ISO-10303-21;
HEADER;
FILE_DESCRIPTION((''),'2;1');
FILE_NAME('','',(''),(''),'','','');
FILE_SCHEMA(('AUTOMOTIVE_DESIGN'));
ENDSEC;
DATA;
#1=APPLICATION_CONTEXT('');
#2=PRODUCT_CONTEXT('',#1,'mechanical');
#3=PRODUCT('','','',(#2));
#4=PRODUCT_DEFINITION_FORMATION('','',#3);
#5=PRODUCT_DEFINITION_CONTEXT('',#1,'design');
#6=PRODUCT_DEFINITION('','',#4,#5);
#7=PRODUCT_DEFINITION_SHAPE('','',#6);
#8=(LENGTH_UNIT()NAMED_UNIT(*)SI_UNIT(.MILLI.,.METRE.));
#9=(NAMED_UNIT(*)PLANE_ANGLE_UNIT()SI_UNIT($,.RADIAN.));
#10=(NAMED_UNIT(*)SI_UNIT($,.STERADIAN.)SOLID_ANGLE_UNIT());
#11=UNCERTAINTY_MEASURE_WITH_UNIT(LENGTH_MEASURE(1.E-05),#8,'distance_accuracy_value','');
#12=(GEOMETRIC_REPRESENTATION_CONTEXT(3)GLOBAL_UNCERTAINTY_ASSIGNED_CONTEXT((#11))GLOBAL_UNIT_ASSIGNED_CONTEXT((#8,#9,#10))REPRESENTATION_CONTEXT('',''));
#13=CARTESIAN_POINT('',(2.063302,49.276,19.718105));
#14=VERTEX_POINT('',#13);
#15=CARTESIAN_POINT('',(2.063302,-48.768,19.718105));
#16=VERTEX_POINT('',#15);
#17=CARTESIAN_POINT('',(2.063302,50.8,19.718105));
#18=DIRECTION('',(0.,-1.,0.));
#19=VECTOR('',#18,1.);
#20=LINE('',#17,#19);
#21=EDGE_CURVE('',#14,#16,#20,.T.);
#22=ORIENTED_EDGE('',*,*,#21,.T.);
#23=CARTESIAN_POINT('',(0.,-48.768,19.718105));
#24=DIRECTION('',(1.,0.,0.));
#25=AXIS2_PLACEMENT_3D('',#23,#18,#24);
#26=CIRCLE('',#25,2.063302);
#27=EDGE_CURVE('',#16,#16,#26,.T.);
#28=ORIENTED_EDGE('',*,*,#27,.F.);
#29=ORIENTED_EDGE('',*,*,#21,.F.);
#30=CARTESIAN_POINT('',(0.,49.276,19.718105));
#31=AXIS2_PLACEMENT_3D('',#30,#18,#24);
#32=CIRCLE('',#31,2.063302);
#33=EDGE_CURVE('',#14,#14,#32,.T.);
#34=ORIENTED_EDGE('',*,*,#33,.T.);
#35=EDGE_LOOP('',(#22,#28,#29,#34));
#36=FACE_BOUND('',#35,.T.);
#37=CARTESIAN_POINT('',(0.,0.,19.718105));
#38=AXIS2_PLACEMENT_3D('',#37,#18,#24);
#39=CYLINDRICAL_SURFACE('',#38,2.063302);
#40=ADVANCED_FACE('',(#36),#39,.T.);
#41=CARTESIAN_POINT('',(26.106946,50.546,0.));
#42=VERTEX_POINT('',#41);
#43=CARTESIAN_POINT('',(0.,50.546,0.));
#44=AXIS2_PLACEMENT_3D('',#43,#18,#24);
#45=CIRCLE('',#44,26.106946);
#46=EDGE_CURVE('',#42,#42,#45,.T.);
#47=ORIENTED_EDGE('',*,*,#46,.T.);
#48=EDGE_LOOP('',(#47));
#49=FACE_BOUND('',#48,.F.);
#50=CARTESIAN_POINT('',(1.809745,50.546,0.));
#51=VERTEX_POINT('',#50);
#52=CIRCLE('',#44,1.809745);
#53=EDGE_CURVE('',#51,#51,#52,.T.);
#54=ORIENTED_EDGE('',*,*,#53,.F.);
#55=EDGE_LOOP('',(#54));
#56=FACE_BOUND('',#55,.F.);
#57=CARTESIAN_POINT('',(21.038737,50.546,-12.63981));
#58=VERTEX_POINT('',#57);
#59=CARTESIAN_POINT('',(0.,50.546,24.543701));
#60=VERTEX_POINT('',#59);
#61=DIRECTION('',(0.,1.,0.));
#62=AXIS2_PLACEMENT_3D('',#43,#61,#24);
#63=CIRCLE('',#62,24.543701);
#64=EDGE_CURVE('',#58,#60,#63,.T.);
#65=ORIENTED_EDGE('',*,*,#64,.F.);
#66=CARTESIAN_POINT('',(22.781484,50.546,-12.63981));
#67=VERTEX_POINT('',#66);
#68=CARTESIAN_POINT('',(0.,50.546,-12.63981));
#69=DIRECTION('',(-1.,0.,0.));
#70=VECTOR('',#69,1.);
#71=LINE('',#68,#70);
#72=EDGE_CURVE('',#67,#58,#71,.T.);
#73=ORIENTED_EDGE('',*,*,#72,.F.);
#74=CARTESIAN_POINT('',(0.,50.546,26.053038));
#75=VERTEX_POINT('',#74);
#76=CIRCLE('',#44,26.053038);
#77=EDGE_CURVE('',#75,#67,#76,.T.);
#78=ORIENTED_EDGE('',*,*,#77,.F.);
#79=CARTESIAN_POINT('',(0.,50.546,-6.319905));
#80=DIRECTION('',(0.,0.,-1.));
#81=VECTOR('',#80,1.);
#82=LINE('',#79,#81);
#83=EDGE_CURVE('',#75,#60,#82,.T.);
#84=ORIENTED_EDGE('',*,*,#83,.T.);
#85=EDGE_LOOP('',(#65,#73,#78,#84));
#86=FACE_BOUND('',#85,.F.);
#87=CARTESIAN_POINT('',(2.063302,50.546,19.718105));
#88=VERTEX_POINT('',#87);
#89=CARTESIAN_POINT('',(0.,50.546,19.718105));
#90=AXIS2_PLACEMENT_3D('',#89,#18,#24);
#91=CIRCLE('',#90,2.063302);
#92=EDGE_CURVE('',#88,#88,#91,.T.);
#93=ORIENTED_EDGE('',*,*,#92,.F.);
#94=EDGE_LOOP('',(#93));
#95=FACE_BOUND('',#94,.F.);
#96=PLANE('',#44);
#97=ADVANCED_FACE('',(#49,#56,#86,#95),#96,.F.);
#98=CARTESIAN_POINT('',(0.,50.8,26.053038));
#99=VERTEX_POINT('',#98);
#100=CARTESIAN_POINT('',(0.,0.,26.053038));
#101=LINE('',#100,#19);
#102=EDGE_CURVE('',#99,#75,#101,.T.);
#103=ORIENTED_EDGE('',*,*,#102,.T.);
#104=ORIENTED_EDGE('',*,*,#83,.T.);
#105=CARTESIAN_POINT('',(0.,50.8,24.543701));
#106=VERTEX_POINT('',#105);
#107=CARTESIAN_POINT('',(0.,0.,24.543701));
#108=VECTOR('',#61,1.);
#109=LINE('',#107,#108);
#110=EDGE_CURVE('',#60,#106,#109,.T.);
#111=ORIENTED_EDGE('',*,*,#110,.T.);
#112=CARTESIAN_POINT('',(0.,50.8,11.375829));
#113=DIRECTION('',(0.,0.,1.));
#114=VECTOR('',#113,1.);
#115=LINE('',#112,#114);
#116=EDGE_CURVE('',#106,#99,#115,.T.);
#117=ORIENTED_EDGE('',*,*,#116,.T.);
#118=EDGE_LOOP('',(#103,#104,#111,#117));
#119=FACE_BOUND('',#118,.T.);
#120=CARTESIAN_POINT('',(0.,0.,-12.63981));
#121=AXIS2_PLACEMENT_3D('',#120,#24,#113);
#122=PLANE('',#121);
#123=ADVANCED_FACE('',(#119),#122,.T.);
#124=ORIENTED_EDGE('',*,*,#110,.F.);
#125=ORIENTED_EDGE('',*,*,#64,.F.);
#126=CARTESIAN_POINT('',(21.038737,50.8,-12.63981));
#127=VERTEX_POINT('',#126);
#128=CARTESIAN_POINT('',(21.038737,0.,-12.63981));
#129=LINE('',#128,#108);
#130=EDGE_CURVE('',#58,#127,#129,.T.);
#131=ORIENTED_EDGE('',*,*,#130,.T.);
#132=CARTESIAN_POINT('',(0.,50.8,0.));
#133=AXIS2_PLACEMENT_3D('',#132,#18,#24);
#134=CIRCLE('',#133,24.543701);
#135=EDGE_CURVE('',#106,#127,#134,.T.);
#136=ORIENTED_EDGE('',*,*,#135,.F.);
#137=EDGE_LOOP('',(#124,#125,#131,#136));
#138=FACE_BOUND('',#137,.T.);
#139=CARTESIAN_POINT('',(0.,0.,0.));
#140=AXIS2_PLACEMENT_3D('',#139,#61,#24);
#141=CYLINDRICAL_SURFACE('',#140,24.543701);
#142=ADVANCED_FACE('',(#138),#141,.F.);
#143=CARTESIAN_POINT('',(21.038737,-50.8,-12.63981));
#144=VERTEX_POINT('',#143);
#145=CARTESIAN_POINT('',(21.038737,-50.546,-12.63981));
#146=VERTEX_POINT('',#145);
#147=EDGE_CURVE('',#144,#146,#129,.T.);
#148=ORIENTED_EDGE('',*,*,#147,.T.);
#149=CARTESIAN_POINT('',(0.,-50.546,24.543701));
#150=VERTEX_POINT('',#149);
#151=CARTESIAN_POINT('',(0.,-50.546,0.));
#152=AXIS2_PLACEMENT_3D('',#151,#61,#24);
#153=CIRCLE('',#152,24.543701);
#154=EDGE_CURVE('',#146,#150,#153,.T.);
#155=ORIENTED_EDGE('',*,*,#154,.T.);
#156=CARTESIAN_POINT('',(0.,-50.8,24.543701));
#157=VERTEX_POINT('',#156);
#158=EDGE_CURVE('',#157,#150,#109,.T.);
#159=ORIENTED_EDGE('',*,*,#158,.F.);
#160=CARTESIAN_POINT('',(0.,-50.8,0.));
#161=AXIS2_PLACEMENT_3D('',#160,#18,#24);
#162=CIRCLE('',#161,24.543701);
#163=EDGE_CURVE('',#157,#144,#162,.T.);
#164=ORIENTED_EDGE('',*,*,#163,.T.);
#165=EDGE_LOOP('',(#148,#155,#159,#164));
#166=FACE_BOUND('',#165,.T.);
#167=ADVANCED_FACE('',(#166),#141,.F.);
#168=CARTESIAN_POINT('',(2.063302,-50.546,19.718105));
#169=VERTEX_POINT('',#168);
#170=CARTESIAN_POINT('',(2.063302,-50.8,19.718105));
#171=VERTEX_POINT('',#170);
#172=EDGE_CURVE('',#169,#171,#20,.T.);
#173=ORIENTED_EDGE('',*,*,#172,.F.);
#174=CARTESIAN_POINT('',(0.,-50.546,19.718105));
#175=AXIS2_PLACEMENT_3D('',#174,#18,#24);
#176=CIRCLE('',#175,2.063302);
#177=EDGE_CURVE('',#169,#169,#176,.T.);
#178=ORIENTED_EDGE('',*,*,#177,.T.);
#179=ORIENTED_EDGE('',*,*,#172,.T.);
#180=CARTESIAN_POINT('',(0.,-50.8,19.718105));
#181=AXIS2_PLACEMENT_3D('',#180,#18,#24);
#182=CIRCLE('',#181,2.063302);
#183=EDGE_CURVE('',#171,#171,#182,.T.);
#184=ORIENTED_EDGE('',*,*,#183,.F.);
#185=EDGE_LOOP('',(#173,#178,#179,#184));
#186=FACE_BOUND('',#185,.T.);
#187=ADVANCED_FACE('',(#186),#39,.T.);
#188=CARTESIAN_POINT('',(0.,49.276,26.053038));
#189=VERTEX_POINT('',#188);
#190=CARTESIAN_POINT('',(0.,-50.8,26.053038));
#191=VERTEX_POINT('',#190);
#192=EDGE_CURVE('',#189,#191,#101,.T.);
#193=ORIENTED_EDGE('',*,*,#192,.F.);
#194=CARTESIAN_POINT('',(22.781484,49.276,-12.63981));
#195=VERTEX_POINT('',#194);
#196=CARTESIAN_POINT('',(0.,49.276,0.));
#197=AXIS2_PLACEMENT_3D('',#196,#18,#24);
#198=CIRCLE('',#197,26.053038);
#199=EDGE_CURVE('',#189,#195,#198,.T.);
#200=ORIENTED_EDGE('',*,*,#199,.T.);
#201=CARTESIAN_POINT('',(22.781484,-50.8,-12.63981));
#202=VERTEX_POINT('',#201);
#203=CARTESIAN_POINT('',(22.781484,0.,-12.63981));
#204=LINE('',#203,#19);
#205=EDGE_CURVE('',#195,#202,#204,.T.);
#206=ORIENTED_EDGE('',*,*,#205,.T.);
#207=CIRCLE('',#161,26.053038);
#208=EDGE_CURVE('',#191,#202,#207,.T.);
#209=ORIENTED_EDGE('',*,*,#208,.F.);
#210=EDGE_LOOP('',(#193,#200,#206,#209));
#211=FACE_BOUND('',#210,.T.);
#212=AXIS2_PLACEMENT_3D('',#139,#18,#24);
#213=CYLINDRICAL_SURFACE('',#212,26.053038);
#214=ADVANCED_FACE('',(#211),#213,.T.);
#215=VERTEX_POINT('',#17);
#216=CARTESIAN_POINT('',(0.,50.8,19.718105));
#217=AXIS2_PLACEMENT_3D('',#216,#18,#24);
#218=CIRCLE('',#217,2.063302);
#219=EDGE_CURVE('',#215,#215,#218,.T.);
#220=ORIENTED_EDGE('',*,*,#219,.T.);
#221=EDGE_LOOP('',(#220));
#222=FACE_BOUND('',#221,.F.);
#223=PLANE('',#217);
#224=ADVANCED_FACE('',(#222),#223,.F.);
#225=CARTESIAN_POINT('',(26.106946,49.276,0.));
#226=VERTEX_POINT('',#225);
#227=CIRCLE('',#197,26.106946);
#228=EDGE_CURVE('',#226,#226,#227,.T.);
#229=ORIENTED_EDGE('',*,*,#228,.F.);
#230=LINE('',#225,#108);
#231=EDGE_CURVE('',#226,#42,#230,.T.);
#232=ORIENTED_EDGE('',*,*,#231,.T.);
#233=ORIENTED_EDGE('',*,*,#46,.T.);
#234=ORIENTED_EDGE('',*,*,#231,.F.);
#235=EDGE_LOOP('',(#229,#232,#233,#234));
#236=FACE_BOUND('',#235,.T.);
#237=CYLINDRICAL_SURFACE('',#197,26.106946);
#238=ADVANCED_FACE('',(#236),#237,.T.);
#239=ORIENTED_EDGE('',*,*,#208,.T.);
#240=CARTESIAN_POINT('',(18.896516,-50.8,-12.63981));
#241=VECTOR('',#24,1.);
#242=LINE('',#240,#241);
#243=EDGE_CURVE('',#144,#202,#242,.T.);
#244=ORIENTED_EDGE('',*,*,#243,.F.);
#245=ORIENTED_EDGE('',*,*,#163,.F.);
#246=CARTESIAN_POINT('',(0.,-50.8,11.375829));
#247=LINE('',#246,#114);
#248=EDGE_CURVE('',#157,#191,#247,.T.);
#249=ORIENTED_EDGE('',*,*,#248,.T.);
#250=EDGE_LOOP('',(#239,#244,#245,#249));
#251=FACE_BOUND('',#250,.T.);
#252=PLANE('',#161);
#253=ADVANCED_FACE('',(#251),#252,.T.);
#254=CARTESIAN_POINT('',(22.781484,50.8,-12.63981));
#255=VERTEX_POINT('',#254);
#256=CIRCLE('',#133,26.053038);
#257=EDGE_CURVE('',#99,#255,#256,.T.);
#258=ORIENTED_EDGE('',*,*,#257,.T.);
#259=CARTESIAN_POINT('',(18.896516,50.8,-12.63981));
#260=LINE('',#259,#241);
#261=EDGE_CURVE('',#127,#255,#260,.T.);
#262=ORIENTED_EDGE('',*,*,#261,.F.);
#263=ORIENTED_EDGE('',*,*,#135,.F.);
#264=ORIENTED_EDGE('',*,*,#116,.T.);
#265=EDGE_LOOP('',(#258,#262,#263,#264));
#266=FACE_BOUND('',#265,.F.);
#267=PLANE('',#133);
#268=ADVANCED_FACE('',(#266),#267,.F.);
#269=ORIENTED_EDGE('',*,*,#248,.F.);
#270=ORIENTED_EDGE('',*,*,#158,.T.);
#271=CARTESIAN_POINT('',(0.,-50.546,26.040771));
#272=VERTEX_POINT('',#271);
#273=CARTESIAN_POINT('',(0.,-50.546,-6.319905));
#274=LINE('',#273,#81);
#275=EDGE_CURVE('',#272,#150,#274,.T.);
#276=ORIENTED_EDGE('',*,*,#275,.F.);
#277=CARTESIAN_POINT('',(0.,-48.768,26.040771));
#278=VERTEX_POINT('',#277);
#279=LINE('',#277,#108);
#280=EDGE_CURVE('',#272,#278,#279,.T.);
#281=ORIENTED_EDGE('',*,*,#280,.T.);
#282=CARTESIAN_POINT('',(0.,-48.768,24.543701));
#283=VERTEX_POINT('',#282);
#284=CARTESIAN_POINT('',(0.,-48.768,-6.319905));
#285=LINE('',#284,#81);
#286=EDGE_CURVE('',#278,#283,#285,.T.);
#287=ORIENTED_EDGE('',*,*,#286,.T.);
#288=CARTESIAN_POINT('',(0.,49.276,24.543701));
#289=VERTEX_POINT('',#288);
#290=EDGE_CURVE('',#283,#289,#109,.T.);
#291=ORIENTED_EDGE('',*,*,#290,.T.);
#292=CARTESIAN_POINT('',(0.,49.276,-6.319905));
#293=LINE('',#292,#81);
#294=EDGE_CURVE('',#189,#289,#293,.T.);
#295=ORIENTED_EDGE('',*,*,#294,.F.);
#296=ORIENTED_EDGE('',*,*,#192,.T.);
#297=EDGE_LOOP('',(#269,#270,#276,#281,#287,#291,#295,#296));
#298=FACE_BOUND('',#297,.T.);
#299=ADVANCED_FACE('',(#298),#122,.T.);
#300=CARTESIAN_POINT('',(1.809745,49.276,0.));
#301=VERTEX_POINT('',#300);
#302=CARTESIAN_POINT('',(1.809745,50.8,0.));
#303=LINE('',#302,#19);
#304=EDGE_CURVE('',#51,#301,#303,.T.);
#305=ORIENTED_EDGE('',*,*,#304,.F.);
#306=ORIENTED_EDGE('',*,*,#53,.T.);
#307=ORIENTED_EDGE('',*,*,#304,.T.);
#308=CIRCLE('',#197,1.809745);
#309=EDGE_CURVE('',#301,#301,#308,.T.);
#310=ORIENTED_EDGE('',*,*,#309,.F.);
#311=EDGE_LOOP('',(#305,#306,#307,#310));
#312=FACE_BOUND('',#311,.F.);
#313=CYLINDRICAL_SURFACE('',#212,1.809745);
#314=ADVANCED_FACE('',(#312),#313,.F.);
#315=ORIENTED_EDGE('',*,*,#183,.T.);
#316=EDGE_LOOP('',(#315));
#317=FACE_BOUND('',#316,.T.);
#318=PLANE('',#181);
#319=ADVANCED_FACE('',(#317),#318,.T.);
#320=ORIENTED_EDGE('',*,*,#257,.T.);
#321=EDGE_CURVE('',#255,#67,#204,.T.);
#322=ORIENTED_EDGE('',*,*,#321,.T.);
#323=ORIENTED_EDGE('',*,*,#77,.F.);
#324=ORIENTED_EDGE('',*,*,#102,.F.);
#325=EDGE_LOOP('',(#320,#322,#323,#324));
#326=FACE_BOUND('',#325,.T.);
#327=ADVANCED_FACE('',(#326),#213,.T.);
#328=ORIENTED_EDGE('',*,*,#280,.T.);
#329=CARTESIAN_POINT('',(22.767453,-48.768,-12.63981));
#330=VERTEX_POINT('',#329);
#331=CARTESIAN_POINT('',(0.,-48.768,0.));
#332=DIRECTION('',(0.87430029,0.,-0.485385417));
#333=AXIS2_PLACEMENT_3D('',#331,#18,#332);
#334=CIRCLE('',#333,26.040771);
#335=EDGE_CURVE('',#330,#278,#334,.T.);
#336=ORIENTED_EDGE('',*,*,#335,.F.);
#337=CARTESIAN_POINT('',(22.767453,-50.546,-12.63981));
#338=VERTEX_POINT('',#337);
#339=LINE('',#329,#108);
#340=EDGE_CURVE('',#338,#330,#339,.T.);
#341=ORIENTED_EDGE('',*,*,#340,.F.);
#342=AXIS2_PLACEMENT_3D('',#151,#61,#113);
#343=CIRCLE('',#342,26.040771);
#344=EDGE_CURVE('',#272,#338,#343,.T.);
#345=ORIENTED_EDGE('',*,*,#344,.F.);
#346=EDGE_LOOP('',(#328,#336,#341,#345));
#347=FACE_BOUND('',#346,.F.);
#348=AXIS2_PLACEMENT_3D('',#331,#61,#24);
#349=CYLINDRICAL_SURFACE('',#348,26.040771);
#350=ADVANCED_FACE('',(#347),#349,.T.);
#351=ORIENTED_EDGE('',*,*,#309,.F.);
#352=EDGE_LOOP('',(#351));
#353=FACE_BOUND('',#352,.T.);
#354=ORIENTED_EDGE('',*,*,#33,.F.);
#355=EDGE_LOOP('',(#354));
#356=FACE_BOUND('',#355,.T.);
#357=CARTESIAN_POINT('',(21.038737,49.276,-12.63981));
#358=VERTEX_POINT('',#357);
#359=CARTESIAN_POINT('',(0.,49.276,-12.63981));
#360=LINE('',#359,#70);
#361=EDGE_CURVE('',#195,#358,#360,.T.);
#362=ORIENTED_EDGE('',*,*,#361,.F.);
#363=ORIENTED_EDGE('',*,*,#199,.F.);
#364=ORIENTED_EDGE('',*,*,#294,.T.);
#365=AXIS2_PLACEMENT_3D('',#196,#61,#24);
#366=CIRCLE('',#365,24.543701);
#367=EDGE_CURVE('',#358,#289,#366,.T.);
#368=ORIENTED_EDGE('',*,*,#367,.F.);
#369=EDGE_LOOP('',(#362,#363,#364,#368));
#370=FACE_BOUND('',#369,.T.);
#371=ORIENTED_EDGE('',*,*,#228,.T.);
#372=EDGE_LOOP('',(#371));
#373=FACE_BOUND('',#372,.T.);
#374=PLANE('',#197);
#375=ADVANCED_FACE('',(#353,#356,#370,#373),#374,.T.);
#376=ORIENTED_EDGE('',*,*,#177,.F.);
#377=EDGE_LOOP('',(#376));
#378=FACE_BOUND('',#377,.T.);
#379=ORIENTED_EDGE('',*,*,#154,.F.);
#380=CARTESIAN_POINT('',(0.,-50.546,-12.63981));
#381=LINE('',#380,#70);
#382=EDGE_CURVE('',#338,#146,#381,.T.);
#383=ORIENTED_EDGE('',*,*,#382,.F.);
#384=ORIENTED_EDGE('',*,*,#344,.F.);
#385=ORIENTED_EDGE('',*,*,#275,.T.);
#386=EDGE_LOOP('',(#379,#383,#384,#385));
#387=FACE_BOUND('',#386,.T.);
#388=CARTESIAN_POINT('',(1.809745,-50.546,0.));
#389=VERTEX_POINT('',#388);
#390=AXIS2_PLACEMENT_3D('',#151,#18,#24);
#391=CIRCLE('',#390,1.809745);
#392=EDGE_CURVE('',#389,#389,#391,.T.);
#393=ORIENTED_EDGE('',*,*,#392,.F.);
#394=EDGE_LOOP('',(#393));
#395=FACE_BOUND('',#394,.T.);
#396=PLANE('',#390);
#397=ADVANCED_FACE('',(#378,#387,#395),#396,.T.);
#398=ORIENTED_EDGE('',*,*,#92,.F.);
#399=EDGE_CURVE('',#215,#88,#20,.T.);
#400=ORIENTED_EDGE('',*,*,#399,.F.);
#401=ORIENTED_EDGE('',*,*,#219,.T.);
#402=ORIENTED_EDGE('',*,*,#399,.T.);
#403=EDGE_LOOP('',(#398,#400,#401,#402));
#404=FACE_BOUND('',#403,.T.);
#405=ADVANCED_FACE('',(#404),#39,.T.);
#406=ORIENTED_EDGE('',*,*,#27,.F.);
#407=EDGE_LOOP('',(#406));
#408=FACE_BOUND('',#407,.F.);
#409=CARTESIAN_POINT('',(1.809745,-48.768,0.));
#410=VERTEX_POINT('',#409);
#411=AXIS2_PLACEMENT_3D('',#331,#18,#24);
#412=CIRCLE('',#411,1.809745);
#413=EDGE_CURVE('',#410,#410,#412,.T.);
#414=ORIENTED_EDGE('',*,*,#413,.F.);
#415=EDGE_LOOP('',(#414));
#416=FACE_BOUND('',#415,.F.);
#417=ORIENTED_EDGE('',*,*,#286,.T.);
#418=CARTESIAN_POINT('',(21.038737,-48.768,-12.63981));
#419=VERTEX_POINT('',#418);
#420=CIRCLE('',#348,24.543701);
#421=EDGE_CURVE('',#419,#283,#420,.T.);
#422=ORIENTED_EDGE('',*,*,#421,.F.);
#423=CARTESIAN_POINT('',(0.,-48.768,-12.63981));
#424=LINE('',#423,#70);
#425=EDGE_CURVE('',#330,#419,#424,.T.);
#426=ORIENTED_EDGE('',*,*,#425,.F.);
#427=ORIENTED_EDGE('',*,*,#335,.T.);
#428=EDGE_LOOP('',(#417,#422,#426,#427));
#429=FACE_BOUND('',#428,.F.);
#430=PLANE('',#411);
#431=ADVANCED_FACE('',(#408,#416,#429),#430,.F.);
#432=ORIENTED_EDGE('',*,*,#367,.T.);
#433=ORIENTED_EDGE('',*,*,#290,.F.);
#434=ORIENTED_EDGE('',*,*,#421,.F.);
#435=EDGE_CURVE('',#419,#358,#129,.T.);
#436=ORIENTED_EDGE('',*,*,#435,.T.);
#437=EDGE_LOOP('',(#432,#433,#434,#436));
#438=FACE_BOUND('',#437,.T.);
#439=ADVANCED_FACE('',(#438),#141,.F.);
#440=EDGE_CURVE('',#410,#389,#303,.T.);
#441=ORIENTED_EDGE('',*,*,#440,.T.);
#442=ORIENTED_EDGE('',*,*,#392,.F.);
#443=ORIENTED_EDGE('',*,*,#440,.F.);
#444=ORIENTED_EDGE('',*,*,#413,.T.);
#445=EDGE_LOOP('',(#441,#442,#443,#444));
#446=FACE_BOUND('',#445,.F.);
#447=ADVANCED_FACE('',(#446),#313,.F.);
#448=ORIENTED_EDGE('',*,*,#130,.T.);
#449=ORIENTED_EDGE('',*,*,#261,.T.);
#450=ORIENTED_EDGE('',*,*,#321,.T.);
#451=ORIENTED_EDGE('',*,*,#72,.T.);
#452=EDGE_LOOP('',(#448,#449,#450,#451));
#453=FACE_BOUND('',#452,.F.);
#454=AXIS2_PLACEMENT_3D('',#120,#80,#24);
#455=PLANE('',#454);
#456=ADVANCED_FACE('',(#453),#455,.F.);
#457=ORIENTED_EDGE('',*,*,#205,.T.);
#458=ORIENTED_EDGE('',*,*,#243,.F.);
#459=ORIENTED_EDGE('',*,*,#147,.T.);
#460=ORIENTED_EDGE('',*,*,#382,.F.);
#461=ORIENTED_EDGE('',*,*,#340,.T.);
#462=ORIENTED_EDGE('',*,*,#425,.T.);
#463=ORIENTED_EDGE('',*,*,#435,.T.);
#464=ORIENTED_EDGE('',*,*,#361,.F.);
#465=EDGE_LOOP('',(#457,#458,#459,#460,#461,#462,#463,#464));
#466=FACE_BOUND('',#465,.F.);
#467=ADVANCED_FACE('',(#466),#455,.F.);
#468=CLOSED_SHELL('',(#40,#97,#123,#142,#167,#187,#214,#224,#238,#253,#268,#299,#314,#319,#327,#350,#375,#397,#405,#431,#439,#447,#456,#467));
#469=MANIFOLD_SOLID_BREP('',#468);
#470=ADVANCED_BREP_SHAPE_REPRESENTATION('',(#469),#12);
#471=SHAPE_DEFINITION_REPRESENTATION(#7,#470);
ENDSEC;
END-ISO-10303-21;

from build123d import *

# Parameters (mm, degrees)
F0_R      = 26.0530381456
F0_R_2    = 24.5437010233
F1_DEPTH  = 50.8
F2_W      = 37.793032825
F2_H      = 48.0312788859
F3_DEPTH  = 50.8
F7_START  = 48.768
F6_R      = 26.0407706564
F7_DEPTH  = 1.778
F9_START  = -49.276
F8_R      = 26.1069464333
F9_DEPTH  = 1.27
F10_R     = 2.063301756
F11_DEPTH = 50.8
F12_R     = 1.8097447332
F13_DEPTH = 50.8


# Not quite as in the source:
# - the program builds the solid bodies; features that only make, move or delete a surface that nothing else refers to are left out


with BuildPart() as f1:
    # F0 (on Front) → F1 (new body, symmetric)
    with BuildSketch(Plane.XZ):
        Circle(F0_R)
        Circle(F0_R_2, mode=Mode.SUBTRACT)
    extrude(amount=F1_DEPTH, both=True)

    # F2 (on Front) → F3 (cut, symmetric)
    with BuildSketch(Plane.XZ):
        with Locations((18.8965164125, 11.3758291118)):
            Rectangle(F2_W, F2_H)
    extrude(amount=F3_DEPTH, both=True, mode=Mode.SUBTRACT)

    # F6 (on Front) → F7 (join)
    with BuildSketch(Plane.XZ.offset(F7_START)):
        Circle(F6_R)
    extrude(amount=F7_DEPTH)

    # F8 (on Front) → F9 (join)
    with BuildSketch(Plane.XZ.offset(F9_START)):
        Circle(F8_R)
    extrude(amount=-F9_DEPTH)

    # F10 (on Front) → F11 (join, symmetric)
    with BuildSketch(Plane.XZ):
        with Locations((0, 19.7181049734)):
            Circle(F10_R)
    extrude(amount=F11_DEPTH, both=True)

    # F12 (on Front) → F13 (cut, symmetric)
    with BuildSketch(Plane.XZ):
        Circle(F12_R)
    extrude(amount=F13_DEPTH, both=True, mode=Mode.SUBTRACT)


solid = f1.part
